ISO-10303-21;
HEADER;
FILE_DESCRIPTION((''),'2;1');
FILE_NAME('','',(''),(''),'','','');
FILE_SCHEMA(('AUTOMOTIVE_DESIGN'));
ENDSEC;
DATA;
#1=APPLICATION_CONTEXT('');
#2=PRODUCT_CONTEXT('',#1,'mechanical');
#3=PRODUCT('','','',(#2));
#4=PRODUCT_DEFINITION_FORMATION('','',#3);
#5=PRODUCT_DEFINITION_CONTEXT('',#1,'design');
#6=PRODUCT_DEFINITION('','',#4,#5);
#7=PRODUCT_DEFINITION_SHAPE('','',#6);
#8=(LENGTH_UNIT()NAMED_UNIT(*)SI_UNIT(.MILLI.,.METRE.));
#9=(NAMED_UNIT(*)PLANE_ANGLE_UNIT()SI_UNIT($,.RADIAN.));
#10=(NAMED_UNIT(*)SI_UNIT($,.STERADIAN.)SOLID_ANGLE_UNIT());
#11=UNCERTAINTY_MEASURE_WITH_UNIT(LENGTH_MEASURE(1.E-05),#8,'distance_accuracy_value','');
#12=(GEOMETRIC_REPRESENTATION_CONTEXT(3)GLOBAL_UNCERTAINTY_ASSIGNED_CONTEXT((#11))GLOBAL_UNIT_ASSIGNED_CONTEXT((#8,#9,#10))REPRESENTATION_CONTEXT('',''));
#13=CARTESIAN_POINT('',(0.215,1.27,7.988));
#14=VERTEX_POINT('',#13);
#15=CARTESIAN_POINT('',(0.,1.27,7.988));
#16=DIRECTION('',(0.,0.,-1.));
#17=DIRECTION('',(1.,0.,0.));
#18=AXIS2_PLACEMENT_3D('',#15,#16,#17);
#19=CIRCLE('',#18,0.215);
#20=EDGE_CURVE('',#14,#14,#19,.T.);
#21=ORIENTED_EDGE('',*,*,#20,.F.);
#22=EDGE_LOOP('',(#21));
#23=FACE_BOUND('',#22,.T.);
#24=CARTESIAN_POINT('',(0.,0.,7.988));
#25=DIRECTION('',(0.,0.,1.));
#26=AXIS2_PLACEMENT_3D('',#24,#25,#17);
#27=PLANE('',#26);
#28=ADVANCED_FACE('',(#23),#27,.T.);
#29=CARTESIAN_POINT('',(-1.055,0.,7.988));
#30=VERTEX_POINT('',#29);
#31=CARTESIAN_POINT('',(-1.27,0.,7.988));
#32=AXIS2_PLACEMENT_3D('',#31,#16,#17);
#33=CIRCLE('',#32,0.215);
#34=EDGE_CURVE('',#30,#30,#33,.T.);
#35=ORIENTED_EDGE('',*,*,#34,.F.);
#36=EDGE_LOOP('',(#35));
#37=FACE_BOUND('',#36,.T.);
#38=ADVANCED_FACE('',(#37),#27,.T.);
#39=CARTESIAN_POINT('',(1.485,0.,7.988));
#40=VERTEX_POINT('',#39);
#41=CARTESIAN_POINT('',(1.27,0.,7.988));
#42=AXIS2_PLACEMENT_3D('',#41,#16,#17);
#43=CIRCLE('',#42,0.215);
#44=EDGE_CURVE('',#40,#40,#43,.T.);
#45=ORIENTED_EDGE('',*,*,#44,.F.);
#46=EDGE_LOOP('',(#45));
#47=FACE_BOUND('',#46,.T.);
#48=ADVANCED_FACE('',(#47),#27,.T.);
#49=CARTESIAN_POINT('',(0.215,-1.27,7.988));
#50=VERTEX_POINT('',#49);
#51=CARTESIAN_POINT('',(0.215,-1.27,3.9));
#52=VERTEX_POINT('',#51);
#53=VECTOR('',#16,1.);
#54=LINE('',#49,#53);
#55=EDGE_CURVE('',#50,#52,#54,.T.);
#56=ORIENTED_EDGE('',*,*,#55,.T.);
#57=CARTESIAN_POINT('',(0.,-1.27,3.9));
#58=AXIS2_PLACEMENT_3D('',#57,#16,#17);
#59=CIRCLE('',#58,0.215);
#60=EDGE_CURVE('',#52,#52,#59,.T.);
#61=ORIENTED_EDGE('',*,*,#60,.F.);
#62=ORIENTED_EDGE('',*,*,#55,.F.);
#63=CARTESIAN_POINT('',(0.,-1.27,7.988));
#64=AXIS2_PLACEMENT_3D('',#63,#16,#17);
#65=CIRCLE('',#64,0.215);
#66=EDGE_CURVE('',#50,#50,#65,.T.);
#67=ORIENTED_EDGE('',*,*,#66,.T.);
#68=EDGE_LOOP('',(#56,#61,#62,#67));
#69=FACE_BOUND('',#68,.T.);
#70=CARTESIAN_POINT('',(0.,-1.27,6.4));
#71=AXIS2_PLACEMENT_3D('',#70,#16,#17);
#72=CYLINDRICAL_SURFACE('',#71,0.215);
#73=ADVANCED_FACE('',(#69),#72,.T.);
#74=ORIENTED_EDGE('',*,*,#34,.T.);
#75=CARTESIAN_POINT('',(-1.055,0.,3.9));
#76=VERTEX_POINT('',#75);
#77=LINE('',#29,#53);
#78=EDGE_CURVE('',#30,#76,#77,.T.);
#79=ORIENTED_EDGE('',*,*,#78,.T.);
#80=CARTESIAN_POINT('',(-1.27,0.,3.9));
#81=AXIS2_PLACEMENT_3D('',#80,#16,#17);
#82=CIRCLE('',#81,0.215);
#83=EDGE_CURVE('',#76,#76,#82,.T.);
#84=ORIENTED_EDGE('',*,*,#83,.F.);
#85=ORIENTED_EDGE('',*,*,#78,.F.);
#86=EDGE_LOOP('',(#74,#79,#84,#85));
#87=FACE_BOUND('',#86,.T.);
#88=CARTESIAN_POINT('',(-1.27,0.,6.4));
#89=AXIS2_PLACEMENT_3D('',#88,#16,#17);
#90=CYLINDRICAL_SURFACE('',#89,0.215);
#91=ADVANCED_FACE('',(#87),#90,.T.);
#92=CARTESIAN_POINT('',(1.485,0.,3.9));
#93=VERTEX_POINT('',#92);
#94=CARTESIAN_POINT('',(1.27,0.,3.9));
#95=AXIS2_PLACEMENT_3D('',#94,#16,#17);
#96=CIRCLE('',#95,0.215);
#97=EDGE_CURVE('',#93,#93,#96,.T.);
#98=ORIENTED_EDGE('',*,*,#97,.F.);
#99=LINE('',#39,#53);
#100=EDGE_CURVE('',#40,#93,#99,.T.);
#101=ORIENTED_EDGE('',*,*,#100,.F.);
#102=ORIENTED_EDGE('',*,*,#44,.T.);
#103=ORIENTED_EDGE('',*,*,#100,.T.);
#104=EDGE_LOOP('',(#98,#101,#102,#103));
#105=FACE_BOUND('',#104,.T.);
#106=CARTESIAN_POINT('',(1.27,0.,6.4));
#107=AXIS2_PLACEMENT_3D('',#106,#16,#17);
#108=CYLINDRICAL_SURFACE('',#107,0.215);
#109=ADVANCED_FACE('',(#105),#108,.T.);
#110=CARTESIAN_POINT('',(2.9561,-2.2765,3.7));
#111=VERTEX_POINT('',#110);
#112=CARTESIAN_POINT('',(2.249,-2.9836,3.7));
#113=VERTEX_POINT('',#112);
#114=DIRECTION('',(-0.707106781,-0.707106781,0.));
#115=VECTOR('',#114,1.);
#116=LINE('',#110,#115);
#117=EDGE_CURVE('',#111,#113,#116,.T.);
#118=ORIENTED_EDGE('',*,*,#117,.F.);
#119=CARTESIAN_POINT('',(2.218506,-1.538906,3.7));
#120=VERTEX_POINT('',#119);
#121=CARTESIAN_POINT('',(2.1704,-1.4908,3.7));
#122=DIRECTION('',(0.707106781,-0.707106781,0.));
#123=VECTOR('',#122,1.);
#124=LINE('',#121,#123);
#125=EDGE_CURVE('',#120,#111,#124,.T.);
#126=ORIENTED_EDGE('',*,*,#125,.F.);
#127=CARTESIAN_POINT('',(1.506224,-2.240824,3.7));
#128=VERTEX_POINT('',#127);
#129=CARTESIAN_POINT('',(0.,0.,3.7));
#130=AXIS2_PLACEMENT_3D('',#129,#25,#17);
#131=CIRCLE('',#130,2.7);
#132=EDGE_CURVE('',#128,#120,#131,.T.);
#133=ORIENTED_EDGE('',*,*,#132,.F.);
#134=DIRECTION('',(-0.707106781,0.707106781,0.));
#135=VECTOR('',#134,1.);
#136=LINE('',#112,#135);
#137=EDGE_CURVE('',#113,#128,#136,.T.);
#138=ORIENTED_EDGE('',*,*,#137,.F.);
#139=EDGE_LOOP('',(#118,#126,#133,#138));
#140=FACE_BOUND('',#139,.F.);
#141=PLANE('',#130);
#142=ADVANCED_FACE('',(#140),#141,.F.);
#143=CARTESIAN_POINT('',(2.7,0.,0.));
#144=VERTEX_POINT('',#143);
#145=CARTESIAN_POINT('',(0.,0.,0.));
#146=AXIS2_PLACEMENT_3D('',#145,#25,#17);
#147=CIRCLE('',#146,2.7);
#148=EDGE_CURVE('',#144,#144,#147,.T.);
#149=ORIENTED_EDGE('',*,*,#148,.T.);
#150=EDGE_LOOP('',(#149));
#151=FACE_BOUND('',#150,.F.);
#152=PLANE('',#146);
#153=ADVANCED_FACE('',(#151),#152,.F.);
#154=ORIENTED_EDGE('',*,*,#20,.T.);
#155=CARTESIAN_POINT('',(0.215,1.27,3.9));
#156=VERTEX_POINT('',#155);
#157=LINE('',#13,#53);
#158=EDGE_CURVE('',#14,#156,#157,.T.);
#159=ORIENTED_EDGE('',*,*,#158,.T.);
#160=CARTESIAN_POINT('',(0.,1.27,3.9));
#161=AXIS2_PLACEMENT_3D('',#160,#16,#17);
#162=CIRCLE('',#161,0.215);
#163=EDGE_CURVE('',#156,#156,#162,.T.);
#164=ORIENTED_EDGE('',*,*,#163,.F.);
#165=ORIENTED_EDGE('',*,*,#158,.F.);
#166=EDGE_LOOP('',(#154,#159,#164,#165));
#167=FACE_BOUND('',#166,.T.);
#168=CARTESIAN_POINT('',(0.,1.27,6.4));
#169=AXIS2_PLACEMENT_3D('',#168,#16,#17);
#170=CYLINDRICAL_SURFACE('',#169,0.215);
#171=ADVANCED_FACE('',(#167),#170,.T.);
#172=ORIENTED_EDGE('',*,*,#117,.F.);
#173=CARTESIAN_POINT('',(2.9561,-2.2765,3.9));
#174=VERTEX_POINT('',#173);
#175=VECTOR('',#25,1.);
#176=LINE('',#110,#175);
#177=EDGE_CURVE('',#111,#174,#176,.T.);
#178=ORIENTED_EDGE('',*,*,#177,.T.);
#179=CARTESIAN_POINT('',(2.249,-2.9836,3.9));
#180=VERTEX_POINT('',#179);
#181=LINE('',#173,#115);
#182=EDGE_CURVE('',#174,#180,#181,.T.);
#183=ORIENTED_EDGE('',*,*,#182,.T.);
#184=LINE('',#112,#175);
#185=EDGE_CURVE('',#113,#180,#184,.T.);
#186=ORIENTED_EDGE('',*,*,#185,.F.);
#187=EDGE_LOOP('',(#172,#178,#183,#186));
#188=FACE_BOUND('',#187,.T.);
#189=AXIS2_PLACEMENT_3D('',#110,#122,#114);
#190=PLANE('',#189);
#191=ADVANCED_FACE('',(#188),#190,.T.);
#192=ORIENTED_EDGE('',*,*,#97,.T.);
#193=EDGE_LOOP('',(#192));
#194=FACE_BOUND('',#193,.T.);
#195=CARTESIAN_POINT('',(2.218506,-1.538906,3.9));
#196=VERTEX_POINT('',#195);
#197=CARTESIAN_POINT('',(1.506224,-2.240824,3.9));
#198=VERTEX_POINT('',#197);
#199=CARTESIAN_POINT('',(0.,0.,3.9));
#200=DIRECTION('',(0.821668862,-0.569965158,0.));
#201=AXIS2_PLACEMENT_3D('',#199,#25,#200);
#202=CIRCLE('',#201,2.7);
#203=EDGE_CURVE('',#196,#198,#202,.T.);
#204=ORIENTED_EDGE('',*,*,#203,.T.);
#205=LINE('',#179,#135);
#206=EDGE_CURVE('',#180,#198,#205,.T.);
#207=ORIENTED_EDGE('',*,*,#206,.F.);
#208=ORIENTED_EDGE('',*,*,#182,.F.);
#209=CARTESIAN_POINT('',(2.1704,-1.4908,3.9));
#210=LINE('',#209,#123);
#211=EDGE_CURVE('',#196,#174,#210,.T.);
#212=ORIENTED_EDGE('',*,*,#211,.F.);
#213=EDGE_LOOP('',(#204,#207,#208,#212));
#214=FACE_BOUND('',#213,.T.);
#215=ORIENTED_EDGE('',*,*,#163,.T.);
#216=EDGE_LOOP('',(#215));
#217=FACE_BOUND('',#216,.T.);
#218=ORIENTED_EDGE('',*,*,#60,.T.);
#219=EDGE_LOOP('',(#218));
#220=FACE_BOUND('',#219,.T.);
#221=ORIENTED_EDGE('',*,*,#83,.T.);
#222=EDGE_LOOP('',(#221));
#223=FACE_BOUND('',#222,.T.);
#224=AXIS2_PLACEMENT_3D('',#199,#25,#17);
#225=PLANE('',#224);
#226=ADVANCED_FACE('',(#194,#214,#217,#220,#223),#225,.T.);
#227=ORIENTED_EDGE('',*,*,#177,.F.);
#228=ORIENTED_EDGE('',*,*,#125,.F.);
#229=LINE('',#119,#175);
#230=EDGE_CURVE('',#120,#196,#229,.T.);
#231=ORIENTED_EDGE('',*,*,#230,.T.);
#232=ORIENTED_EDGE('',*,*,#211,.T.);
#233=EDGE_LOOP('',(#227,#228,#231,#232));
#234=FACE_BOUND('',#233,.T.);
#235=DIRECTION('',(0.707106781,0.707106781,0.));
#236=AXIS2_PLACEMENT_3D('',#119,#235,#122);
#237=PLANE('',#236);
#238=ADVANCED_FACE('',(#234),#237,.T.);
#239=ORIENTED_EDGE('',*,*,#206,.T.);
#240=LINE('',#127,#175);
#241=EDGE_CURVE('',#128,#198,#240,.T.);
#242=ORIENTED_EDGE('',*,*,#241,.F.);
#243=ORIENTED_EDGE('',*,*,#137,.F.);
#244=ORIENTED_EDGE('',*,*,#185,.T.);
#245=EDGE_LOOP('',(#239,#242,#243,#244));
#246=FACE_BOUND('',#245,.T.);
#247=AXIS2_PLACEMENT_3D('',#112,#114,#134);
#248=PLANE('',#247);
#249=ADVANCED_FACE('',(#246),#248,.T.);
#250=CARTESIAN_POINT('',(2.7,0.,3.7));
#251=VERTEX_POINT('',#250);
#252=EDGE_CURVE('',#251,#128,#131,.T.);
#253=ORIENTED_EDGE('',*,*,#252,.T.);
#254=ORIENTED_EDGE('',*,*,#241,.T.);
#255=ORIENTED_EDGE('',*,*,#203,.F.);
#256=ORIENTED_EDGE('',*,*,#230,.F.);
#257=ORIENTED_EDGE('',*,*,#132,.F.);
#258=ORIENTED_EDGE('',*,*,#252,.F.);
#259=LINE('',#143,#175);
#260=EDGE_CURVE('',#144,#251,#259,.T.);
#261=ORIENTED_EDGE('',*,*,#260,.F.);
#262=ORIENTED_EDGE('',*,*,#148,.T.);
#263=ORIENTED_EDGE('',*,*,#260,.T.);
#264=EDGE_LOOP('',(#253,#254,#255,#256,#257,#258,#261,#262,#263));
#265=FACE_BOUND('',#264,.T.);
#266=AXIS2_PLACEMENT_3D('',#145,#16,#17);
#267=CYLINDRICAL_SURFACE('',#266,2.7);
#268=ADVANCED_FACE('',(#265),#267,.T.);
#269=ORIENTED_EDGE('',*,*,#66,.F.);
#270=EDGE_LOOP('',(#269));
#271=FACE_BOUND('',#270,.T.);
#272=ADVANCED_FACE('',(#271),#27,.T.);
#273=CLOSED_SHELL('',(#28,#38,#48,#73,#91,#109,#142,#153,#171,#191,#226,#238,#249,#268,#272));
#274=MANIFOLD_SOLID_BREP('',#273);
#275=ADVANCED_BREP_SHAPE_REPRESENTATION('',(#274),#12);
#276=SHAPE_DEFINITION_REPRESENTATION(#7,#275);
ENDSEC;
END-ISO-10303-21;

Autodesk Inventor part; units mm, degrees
ref_plane "YZ Plane" through (0, 0, 0) normal (1, 0, 0) x (0, 1, 0)
ref_plane "XZ Plane" through (0, 0, 0) normal (0, 1, 0) x (-1, 0, 0)
ref_plane "XY Plane" through (0, 0, 0) normal (0, 0, 1) x (1, 0, 0)
sketch "Sketch1" plane through (0, 0, 0) normal (0, 0, 1) x (1, 0, 0)
  circle A0 centre (0, 0) radius 2.7
  dimension "d0" = 5.4
extrude "Extrusion1" add sketch "Sketch1" along normal blind 3.7
sketch "Sketch2" plane through (0, 0, 3.7) normal (0, 0, 1) x (1, 0, 0)
  circle A0 centre (0, 0) radius 1.27
  circle A1 centre (1.27, 0) radius 0.215
  circle A2 centre (0, 1.27) radius 0.215
  circle A3 centre (-1.27, 0) radius 0.215
  circle A4 centre (0, -1.27) radius 0.215
  dimension "d3" = 2.54
  dimension "d4" = 0.43
  dimension "d7" = 360
extrude "Extrusion2" add sketch "Sketch2" along normal blind 12.7 contours A0 A1 | A0 A1 | A2 A0 | A0 A2 | A4 A0 | A0 A4 | A3 A0 | A0 A3
sketch "Sketch3" plane through (0, 0, 3.7) normal (0, 0, 1) x (1, 0, 0)
  line L0 (2.9561, -2.2765) -> (2.249, -2.9836)
  line L1 (2.249, -2.9836) -> (1.4633, -2.1979)
  line L2 (1.4633, -2.1979) -> (2.1704, -1.4908)
  line L3 (2.1704, -1.4908) -> (2.9561, -2.2765)
  circle A0 centre (0, 0) radius 2.7 projected
  point P0 (2.2185, -1.5389)
  point P1 (1.5062, -2.2408)
  dimension "d11" = 1
  dimension "d12" = 6.4
extrude "Extrusion3" add sketch "Sketch3" along normal blind 0.2
sketch "Sketch4" plane through (0, 0, 3.9) normal (0, 0, 1) x (1, 0, 0)
  line L0 (-0.2098, -1.6461) -> (0.1759, -1.6461) construction
  line L1 (0.1759, -1.6461) -> (0.1759, -2.1461) construction
  line L2 (0.1759, -2.1461) -> (-0.2098, -2.1461) construction
  line L3 (-0.2098, -2.1461) -> (-0.2098, -1.6461) construction
  line L4 (1.5616, 0.2129) -> (1.9473, 0.2129) construction
  line L5 (1.9473, 0.2129) -> (1.9473, -0.2871) construction
  line L6 (1.9473, -0.2871) -> (1.5616, -0.2871) construction
  line L7 (1.5616, -0.2871) -> (1.5616, 0.2129) construction
  line L8 (-1.9384, 0.2505) -> (-1.5527, 0.2505) construction
  line L9 (-1.5527, 0.2505) -> (-1.5527, -0.2495) construction
  line L10 (-1.5527, -0.2495) -> (-1.9384, -0.2495) construction
  line L11 (-1.9384, -0.2495) -> (-1.9384, 0.2505) construction
  line L12 (-0.1933, 2.1269) -> (0.1924, 2.1269) construction
  line L13 (0.1924, 2.1269) -> (0.1924, 1.6269) construction
  line L14 (0.1924, 1.6269) -> (-0.1933, 1.6269) construction
  line L15 (-0.1933, 1.6269) -> (-0.1933, 2.1269) construction
  point P0 (0, 0)
move faces "Move1" translate (0, 0, -10) faces at (-0.0635, 1.2367, 16.4) (1.2786, 0.0711, 16.4) (-0.0635, -1.3033, 16.4) (-1.2446, 0.067, 16.4)
move faces "Move2" translate (0, 0, 1.588) faces at (-1.2446, 0.067, 6.4) (-0.0635, 1.2367, 6.4) (1.2786, 0.0711, 6.4) (-0.0635, -1.3033, 6.4)
properties part number "Sensor"
